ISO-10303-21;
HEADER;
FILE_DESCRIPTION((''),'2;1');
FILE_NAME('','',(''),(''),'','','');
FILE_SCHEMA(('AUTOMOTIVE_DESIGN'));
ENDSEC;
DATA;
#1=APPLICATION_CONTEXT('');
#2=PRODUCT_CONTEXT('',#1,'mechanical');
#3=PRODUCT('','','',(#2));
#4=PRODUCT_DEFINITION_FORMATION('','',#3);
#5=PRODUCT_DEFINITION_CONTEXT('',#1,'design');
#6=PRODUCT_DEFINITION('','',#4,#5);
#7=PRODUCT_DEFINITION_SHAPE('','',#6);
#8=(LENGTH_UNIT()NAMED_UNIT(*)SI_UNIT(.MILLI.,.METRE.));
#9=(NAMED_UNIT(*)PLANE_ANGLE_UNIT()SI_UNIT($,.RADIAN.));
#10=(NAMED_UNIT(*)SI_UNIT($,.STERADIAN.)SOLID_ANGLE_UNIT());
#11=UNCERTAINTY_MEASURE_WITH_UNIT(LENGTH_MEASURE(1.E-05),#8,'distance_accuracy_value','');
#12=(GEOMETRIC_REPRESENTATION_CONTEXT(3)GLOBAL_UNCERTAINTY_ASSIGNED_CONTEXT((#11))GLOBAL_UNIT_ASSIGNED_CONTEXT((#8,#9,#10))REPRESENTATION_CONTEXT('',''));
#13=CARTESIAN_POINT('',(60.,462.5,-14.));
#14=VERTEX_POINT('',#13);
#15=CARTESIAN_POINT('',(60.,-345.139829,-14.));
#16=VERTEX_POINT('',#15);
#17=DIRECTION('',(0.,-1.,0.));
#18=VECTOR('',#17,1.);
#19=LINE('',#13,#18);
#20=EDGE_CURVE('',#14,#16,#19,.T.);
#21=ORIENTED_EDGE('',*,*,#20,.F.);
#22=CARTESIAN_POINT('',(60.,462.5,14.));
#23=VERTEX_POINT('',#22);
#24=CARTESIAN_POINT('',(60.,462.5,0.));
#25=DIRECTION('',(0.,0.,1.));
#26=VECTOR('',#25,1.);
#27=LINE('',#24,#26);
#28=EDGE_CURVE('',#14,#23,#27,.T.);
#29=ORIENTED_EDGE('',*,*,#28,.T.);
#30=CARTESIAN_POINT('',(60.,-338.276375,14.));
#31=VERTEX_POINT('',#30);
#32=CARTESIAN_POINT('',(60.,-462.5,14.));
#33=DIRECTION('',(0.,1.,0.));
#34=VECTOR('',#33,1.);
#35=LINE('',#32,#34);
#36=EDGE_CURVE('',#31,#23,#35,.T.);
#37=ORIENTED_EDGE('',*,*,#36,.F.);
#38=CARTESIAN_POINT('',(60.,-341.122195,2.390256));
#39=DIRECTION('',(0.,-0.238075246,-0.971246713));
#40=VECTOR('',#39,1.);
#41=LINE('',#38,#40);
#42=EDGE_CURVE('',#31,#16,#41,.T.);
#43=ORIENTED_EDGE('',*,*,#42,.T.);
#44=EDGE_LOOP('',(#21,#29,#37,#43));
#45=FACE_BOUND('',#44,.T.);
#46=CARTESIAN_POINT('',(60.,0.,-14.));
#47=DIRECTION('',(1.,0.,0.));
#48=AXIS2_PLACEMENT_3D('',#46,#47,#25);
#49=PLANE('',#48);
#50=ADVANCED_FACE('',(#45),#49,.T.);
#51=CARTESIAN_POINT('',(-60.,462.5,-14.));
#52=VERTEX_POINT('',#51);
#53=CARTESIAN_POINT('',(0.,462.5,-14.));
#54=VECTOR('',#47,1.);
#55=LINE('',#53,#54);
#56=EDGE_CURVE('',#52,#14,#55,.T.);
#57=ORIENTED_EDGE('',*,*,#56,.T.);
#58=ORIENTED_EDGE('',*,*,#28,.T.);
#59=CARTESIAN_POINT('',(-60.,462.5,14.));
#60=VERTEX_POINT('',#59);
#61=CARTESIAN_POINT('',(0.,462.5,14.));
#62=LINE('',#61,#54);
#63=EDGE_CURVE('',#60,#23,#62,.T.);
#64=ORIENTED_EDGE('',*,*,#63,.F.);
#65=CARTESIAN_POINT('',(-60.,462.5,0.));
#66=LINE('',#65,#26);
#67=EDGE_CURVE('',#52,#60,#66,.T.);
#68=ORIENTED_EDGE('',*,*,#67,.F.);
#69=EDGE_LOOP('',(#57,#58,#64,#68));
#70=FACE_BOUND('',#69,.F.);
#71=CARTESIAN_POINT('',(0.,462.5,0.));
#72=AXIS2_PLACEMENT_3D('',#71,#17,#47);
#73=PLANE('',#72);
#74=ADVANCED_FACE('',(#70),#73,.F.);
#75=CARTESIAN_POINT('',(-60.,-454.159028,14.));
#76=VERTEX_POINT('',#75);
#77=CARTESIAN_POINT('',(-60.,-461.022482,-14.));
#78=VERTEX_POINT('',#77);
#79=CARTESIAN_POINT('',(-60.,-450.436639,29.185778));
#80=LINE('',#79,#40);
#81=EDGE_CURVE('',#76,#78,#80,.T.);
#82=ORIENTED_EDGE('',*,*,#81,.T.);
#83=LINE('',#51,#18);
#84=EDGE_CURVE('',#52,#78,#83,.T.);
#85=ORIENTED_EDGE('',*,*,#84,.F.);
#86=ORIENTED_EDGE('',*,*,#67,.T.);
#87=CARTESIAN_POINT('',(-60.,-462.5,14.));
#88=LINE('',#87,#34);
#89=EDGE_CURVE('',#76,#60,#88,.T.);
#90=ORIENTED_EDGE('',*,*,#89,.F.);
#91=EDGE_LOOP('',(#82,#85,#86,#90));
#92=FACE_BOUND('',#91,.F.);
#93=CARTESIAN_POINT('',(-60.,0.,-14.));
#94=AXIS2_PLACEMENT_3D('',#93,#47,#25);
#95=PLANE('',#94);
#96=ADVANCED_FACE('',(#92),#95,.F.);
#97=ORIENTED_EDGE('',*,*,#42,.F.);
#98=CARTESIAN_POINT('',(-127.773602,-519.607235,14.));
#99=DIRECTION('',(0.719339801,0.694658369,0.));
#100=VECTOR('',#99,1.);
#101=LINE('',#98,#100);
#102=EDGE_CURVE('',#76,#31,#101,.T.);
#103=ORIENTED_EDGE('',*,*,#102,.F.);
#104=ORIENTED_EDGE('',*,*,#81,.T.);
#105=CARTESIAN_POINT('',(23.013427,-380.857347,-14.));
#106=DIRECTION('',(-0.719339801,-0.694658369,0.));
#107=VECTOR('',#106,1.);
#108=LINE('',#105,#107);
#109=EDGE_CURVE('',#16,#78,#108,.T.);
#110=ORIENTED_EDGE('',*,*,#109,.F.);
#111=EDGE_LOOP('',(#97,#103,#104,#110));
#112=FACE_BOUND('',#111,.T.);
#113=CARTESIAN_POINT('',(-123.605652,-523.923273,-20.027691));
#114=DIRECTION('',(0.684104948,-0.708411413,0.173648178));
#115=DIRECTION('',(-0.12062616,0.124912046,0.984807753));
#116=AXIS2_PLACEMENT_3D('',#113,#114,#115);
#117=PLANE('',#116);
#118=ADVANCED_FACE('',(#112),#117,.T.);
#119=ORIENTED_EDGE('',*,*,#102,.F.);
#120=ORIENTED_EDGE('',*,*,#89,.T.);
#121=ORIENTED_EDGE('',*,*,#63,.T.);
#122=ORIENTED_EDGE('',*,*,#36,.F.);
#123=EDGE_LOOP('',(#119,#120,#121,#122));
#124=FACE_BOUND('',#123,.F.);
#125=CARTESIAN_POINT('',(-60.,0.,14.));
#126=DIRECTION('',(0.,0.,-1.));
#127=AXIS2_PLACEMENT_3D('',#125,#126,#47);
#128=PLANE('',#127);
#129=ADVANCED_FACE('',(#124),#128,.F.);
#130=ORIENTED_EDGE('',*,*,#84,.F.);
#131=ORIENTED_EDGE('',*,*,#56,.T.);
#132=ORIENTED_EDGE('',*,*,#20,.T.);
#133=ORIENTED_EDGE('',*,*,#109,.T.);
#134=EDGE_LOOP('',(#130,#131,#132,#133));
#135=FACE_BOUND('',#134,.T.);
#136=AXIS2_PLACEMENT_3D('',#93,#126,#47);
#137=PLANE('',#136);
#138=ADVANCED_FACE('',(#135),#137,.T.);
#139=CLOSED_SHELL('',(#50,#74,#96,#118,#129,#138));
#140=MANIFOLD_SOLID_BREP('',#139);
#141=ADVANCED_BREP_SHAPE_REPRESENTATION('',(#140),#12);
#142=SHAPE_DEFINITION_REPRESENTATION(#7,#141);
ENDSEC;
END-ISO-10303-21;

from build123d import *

# Parameters (mm, degrees)
F0_W        = 120
F0_H        = 28
F1_DEPTH    = 462.5
F2_SIZE2    = 115.882643
F2_SIZE     = 119.99999
F3_T1_DEPTH = 343.6641668027


# Not quite as in the source:
# - a fillet or chamfer that OpenCascade refuses, or shapes differently, is made with other operations: its cross-section is extruded or revolved along the edge and cut away or added
# - a fillet or chamfer is up to 0.001 mm smaller than in the source, because OpenCascade refuses the exact size


with BuildPart() as f1:
    # F0 (on Front) → F1 (new body, symmetric)
    with BuildSketch(Plane.XZ):
        Rectangle(F0_W, F0_H)
    extrude(amount=F1_DEPTH, both=True)

    # F2 (size 120 and 115.8826529768 in the source; OpenCascade refuses exactly that, so slightly less here)
    f2_edges = [f1.edges().sort_by_distance(p)[0] for p in [
        (60, -462.5, 0),
    ]]
    f2_side = f1.faces().sort_by_distance((0, -462.5, 0))[0]
    chamfer(f2_edges, length=F2_SIZE, length2=F2_SIZE2, reference=f2_side)

    # F3: chamfer of 6 x 34.0276909177 on 2 edges, made by hand

    # F3_s2 → F3_t1 (cut)
    with BuildSketch(Plane(origin=(-325.7617702656, -314.5844839382, 0), x_dir=(0, 0, 1), z_dir=(0.7193398013, 0.6946583695, 0))):
        Polygon((-20.0276909177, 291.0151628785), (14, 285.0151628785), (14, 291.0151628785), align=None)
    extrude(amount=F3_T1_DEPTH, mode=Mode.SUBTRACT)


solid = f1.part
